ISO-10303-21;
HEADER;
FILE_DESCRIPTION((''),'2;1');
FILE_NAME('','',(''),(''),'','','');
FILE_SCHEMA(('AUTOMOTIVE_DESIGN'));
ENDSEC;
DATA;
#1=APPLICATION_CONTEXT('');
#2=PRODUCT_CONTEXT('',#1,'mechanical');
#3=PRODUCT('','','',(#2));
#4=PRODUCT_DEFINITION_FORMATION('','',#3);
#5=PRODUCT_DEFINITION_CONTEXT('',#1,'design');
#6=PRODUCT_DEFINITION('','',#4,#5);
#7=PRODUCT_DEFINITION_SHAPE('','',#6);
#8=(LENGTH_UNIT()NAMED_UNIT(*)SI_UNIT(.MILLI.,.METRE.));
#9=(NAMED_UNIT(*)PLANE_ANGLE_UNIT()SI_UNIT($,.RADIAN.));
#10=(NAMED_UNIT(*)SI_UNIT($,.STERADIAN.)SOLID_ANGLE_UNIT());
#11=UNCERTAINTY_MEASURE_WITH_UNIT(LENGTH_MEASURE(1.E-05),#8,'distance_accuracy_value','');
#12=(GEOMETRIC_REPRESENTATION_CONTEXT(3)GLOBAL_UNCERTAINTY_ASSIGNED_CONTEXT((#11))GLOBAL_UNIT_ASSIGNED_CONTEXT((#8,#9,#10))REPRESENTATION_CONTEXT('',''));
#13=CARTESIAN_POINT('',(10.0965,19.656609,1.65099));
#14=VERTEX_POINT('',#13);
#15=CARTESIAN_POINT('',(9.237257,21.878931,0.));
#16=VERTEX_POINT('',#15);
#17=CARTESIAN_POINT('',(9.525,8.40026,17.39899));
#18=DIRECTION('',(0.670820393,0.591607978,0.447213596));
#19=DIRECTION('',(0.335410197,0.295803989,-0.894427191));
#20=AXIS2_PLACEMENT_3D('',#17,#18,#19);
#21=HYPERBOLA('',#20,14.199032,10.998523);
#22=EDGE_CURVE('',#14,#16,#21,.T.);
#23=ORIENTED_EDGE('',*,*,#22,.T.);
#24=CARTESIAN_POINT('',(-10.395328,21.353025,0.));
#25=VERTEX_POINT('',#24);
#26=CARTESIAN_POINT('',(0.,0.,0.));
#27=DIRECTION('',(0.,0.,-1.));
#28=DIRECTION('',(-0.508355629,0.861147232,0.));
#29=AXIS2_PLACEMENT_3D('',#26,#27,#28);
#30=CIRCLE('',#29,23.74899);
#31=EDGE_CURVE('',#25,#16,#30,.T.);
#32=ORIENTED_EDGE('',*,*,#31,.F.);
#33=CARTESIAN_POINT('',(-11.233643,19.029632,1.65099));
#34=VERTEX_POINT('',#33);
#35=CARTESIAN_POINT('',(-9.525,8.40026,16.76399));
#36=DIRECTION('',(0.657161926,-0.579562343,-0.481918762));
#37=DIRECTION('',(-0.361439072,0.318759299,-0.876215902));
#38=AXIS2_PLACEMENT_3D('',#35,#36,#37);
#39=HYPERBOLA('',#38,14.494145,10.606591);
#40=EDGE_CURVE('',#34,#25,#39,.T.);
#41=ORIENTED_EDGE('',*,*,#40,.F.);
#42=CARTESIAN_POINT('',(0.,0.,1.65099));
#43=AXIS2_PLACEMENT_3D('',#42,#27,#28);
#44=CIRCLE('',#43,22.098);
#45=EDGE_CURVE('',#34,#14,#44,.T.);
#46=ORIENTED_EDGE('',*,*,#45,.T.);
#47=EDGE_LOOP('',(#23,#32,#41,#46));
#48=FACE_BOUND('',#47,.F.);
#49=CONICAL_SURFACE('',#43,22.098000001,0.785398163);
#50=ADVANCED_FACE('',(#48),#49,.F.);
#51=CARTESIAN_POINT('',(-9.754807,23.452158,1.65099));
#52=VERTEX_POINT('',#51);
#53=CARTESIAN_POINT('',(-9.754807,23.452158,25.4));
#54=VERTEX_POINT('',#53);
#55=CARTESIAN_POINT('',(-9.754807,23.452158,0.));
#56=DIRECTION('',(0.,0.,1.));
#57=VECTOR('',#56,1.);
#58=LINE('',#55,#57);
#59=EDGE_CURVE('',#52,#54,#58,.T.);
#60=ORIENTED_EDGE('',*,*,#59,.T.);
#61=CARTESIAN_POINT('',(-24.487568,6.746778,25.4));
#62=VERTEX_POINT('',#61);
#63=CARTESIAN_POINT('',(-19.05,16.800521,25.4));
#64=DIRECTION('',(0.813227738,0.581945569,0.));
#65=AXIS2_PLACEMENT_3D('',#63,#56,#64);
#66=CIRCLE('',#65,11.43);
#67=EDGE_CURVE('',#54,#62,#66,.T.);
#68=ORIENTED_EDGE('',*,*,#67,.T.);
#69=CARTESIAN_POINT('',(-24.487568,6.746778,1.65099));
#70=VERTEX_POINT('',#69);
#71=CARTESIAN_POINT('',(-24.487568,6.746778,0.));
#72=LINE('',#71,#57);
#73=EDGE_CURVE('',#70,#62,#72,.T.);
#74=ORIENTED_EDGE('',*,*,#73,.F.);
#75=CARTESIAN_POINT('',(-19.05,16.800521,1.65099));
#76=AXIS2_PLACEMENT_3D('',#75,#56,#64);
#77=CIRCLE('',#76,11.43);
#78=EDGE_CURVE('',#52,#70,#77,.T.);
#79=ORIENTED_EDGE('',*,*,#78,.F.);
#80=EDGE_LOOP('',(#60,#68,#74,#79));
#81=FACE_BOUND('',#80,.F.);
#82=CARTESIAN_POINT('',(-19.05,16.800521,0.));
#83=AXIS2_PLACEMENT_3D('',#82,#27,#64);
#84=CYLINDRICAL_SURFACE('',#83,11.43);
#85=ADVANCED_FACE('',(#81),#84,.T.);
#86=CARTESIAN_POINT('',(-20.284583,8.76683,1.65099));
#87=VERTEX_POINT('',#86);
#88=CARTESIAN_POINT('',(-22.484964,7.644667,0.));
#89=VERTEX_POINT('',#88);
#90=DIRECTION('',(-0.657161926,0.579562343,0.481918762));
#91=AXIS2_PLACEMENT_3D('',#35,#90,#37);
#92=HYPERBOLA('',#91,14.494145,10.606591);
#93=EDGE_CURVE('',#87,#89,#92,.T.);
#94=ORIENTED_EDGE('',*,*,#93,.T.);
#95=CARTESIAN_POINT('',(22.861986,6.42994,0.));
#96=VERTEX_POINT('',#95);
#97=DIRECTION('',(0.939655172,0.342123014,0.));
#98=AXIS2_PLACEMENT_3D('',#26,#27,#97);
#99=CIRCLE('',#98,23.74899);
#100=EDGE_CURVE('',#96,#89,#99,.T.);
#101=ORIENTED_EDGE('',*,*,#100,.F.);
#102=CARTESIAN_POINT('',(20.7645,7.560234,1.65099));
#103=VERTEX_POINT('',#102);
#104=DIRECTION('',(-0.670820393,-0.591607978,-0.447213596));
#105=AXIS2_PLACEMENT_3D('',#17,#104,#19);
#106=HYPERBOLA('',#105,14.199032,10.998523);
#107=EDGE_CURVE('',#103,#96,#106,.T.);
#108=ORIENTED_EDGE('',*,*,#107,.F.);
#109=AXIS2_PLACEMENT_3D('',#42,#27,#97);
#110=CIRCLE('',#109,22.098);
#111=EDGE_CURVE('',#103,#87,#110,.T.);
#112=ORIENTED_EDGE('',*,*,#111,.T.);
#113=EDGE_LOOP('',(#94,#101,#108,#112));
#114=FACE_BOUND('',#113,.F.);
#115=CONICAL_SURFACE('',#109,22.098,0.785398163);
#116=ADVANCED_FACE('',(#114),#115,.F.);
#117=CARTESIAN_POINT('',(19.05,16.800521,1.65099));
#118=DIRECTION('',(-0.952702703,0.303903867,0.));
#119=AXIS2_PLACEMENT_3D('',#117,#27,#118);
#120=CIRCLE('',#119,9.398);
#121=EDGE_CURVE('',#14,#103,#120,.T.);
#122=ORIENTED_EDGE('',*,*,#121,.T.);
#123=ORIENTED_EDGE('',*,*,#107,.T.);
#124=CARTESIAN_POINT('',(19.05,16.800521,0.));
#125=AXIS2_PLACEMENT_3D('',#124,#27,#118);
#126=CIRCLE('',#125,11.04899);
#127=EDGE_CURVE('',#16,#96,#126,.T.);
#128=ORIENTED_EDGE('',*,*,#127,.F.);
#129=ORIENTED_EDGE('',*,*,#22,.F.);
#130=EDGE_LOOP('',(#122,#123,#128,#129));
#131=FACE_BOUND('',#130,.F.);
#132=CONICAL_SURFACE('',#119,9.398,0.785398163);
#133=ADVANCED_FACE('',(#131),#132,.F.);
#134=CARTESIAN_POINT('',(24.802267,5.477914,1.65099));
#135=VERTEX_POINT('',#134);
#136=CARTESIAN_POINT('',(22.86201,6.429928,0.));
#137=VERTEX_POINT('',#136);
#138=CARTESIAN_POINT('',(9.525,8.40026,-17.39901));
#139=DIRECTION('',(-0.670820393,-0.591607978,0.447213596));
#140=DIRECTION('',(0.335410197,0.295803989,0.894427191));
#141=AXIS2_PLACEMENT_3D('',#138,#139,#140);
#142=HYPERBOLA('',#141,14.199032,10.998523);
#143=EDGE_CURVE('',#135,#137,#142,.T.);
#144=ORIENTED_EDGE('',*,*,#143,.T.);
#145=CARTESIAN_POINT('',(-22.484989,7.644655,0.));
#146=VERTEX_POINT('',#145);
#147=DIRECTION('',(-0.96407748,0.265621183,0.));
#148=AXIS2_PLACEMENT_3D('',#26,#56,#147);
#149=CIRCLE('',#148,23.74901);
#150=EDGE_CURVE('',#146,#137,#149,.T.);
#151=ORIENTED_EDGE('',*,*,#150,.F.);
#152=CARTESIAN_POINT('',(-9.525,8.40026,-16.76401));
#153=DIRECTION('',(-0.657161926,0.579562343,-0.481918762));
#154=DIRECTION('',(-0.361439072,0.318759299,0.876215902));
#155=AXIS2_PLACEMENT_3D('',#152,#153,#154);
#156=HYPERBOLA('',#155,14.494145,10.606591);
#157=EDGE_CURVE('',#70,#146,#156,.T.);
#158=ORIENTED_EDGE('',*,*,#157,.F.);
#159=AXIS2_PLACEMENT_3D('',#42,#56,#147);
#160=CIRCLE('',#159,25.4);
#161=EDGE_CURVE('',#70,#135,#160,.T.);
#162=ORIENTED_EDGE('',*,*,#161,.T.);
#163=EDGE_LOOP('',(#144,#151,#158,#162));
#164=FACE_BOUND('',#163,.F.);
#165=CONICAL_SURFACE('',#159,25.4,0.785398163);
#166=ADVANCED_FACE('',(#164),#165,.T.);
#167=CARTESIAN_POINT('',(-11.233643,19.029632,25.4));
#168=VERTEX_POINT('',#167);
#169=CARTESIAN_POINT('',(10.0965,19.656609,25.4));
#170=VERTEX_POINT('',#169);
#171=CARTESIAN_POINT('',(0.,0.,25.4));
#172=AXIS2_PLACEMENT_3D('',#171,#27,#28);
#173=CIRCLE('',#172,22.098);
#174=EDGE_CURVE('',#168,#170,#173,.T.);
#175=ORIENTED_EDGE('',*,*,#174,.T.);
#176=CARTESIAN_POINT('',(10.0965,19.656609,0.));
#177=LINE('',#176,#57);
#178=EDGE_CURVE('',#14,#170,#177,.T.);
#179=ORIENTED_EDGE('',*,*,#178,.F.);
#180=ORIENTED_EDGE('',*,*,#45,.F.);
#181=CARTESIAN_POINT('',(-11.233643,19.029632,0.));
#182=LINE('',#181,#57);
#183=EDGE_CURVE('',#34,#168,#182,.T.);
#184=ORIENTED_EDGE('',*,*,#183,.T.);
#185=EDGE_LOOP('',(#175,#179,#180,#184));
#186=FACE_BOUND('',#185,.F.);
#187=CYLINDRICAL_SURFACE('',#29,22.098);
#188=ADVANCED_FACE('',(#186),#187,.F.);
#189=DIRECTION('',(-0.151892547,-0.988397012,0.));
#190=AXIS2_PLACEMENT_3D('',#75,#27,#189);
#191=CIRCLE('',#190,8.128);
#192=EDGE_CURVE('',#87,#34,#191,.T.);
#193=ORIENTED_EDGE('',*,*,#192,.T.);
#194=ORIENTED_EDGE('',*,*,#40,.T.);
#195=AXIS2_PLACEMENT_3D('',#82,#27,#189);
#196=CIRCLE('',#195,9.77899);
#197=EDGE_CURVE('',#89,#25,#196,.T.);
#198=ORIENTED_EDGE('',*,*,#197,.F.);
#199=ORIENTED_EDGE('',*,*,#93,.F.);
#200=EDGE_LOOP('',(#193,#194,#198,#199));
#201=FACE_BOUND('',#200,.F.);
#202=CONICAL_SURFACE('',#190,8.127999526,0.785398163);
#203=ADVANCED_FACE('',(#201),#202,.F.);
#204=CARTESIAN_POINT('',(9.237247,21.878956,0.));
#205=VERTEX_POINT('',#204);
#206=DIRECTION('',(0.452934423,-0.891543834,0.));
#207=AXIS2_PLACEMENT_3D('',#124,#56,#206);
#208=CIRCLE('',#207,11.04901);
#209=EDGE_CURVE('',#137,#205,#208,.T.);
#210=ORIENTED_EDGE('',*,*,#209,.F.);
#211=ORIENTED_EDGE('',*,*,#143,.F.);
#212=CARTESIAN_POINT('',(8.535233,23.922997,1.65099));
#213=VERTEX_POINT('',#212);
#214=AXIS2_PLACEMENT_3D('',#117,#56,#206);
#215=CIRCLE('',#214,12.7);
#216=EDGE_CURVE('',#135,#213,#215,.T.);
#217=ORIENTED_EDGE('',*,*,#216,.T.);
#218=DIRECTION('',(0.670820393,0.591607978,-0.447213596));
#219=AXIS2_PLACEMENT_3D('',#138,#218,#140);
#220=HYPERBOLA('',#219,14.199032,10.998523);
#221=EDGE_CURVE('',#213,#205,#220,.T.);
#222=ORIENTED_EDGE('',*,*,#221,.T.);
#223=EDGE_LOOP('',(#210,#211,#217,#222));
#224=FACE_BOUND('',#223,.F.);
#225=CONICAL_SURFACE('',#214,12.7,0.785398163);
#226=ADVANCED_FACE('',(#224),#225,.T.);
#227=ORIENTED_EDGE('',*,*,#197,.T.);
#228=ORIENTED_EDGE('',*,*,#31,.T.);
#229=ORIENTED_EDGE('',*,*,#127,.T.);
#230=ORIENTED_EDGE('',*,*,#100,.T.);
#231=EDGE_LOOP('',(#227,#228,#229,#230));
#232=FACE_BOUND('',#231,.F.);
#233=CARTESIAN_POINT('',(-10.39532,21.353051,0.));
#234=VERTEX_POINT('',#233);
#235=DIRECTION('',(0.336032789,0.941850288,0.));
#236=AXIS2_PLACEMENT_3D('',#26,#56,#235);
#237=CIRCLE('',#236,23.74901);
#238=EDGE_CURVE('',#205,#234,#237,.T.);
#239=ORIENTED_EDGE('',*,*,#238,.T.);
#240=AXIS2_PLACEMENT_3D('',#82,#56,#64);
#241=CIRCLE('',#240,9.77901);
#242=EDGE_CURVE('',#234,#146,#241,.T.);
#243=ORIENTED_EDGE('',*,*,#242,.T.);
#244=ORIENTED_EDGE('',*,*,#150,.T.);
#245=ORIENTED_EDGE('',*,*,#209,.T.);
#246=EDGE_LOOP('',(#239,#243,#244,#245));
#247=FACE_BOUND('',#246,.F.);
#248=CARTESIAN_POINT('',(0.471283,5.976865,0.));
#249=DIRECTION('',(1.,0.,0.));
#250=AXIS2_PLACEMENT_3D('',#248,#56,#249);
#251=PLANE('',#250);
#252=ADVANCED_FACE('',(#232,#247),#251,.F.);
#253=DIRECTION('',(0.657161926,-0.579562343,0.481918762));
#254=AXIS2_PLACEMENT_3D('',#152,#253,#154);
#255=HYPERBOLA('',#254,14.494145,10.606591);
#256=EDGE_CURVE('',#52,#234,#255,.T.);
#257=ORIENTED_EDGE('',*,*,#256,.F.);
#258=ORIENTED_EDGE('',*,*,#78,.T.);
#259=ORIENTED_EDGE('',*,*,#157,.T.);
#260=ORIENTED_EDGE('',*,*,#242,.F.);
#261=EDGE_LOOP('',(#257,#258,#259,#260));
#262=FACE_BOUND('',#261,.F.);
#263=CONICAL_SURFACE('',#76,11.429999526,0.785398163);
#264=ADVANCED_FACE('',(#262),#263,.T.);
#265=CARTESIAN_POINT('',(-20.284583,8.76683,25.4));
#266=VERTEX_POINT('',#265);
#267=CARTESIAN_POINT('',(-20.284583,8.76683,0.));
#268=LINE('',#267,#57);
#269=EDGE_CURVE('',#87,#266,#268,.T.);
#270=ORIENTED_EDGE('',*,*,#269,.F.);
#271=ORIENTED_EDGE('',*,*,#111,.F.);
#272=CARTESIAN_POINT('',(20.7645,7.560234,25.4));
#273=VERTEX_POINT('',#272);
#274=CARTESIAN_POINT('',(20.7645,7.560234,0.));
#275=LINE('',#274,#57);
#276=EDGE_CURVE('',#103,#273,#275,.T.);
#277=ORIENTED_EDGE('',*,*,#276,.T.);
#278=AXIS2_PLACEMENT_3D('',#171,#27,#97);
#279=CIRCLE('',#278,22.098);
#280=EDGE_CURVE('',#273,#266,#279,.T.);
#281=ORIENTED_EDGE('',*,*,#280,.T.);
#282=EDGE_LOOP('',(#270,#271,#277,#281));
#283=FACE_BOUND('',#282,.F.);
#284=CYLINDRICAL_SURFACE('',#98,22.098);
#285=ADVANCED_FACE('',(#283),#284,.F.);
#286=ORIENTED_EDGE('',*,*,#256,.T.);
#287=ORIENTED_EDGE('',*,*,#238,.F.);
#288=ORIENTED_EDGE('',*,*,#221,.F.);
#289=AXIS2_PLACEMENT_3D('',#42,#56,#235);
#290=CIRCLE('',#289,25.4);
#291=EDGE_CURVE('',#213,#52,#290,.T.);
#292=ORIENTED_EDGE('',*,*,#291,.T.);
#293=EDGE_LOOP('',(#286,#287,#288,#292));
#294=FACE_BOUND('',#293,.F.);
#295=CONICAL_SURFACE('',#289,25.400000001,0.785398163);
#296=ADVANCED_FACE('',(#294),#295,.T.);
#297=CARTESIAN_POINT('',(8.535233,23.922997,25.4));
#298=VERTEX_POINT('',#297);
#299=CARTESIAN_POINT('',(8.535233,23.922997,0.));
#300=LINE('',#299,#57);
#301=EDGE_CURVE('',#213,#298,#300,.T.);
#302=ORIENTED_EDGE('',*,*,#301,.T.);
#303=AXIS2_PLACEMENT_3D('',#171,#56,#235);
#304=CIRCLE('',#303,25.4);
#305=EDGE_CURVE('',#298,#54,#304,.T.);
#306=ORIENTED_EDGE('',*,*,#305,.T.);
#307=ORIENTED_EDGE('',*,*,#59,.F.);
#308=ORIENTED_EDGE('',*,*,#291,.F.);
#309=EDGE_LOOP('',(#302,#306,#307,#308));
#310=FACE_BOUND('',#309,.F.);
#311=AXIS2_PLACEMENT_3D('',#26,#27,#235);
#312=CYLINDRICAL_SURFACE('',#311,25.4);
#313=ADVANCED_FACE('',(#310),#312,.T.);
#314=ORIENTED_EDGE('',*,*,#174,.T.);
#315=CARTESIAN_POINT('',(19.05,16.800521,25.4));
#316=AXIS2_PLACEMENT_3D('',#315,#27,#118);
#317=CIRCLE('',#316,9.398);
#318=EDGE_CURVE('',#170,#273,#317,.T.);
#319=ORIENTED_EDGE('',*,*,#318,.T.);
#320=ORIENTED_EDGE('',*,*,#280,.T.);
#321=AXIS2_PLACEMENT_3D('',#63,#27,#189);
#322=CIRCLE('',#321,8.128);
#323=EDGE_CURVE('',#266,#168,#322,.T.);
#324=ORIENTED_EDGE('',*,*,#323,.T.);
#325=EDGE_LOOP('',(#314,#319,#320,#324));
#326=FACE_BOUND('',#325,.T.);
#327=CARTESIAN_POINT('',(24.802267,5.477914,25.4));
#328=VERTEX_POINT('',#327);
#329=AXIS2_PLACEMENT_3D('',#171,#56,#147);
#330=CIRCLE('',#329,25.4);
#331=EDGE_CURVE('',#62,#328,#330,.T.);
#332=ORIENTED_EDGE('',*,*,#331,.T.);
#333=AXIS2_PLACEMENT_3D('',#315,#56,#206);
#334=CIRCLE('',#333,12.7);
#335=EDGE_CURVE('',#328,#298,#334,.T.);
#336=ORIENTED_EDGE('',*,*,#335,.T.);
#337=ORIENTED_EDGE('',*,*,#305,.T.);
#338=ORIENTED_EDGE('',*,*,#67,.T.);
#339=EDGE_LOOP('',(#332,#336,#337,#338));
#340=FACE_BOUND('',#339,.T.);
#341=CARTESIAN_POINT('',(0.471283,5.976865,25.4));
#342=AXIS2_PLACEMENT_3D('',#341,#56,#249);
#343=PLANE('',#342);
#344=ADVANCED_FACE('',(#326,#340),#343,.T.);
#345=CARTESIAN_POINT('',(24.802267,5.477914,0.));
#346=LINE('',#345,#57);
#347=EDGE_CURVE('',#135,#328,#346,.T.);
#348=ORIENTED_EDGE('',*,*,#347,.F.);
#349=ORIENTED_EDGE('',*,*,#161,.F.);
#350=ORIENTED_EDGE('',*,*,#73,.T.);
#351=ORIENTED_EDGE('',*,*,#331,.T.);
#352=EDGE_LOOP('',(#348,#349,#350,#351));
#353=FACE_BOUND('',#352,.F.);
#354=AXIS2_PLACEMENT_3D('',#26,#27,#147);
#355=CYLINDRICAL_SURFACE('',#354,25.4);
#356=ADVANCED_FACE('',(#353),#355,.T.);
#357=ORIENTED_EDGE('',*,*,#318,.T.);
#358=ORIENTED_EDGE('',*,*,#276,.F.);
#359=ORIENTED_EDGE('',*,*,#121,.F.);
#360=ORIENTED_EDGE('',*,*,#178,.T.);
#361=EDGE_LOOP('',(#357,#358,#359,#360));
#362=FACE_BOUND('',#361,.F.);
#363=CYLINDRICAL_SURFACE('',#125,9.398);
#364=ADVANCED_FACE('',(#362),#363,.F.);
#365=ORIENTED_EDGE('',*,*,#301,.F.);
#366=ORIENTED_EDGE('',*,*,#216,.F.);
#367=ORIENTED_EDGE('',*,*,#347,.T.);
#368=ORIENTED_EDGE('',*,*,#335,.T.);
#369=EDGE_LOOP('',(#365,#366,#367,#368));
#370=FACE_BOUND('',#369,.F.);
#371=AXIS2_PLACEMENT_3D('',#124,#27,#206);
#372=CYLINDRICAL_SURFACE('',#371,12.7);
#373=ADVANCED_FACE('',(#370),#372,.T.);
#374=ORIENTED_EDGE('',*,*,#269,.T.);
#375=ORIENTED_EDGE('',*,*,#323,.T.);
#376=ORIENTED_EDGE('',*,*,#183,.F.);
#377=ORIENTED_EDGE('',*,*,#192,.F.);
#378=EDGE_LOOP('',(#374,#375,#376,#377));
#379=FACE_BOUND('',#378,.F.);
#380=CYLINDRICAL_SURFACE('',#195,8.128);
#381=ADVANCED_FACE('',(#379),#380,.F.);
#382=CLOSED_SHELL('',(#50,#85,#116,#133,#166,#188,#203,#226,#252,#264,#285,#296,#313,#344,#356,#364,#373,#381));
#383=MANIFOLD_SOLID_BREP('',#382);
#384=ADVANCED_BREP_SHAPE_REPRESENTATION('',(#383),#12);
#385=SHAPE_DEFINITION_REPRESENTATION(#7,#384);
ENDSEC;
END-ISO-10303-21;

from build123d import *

# Parameters (mm, degrees)
F1_DEPTH = 25.4
F2_SIZE  = 1.65099


# Not quite as in the source:
# - a fillet or chamfer is up to 0.001 mm smaller than in the source, because OpenCascade refuses the exact size


with BuildPart() as f1:
    # F0 (on Top) → F1 (new body)
    with BuildSketch(Plane.XY):
        with BuildLine():
            ThreePointArc((24.8022671705, 5.4779141289), (28.575, 25.2007812379), (8.5352328295, 23.9229973153))
            ThreePointArc((8.5352328295, 23.9229973153), (-0.6536534353, 25.3915879217), (-9.754807335, 23.4521584051))
            ThreePointArc((-9.754807335, 23.4521584051), (-27.6224996448, 24.3607548834), (-24.4875679847, 6.7467780603))
            ThreePointArc((-24.4875679847, 6.7467780603), (-0.6536534353, -25.3915879217), (24.8022671705, 5.4779141289))
        make_face()
        with BuildLine():
            ThreePointArc((-20.2845825482, 8.7668303761), (-25.1459996448, 22.1766871761), (-11.2336426791, 19.0296315298))
            ThreePointArc((-11.2336426791, 19.0296315298), (-0.6492677951, 22.0884597772), (10.0965, 19.6566093656))
            ThreePointArc((10.0965, 19.6566093656), (26.0985, 23.0167135306), (20.7645, 7.5602343714))
            ThreePointArc((20.7645, 7.5602343714), (-0.6492677951, -22.0884597772), (-20.2845825482, 8.7668303761))
        make_face(mode=Mode.SUBTRACT)
    extrude(amount=F1_DEPTH)

    # F2 (size 1.651 in the source; OpenCascade refuses exactly that, so slightly less here)
    f2_edges = [f1.edges().sort_by_distance(p)[0] for p in [
        (-0.653653, -25.391588, 0),
        (-0.649268, -22.08846, 0),
        (-25.146, 22.176687, 0),
        (-27.6225, 24.360755, 0),
        (-0.649268, 22.08846, 0),
        (-0.653653, 25.391588, 0),
        (28.575, 25.200781, 0),
        (26.0985, 23.016714, 0),
    ]]
    chamfer(f2_edges, length=F2_SIZE)


solid = f1.part
